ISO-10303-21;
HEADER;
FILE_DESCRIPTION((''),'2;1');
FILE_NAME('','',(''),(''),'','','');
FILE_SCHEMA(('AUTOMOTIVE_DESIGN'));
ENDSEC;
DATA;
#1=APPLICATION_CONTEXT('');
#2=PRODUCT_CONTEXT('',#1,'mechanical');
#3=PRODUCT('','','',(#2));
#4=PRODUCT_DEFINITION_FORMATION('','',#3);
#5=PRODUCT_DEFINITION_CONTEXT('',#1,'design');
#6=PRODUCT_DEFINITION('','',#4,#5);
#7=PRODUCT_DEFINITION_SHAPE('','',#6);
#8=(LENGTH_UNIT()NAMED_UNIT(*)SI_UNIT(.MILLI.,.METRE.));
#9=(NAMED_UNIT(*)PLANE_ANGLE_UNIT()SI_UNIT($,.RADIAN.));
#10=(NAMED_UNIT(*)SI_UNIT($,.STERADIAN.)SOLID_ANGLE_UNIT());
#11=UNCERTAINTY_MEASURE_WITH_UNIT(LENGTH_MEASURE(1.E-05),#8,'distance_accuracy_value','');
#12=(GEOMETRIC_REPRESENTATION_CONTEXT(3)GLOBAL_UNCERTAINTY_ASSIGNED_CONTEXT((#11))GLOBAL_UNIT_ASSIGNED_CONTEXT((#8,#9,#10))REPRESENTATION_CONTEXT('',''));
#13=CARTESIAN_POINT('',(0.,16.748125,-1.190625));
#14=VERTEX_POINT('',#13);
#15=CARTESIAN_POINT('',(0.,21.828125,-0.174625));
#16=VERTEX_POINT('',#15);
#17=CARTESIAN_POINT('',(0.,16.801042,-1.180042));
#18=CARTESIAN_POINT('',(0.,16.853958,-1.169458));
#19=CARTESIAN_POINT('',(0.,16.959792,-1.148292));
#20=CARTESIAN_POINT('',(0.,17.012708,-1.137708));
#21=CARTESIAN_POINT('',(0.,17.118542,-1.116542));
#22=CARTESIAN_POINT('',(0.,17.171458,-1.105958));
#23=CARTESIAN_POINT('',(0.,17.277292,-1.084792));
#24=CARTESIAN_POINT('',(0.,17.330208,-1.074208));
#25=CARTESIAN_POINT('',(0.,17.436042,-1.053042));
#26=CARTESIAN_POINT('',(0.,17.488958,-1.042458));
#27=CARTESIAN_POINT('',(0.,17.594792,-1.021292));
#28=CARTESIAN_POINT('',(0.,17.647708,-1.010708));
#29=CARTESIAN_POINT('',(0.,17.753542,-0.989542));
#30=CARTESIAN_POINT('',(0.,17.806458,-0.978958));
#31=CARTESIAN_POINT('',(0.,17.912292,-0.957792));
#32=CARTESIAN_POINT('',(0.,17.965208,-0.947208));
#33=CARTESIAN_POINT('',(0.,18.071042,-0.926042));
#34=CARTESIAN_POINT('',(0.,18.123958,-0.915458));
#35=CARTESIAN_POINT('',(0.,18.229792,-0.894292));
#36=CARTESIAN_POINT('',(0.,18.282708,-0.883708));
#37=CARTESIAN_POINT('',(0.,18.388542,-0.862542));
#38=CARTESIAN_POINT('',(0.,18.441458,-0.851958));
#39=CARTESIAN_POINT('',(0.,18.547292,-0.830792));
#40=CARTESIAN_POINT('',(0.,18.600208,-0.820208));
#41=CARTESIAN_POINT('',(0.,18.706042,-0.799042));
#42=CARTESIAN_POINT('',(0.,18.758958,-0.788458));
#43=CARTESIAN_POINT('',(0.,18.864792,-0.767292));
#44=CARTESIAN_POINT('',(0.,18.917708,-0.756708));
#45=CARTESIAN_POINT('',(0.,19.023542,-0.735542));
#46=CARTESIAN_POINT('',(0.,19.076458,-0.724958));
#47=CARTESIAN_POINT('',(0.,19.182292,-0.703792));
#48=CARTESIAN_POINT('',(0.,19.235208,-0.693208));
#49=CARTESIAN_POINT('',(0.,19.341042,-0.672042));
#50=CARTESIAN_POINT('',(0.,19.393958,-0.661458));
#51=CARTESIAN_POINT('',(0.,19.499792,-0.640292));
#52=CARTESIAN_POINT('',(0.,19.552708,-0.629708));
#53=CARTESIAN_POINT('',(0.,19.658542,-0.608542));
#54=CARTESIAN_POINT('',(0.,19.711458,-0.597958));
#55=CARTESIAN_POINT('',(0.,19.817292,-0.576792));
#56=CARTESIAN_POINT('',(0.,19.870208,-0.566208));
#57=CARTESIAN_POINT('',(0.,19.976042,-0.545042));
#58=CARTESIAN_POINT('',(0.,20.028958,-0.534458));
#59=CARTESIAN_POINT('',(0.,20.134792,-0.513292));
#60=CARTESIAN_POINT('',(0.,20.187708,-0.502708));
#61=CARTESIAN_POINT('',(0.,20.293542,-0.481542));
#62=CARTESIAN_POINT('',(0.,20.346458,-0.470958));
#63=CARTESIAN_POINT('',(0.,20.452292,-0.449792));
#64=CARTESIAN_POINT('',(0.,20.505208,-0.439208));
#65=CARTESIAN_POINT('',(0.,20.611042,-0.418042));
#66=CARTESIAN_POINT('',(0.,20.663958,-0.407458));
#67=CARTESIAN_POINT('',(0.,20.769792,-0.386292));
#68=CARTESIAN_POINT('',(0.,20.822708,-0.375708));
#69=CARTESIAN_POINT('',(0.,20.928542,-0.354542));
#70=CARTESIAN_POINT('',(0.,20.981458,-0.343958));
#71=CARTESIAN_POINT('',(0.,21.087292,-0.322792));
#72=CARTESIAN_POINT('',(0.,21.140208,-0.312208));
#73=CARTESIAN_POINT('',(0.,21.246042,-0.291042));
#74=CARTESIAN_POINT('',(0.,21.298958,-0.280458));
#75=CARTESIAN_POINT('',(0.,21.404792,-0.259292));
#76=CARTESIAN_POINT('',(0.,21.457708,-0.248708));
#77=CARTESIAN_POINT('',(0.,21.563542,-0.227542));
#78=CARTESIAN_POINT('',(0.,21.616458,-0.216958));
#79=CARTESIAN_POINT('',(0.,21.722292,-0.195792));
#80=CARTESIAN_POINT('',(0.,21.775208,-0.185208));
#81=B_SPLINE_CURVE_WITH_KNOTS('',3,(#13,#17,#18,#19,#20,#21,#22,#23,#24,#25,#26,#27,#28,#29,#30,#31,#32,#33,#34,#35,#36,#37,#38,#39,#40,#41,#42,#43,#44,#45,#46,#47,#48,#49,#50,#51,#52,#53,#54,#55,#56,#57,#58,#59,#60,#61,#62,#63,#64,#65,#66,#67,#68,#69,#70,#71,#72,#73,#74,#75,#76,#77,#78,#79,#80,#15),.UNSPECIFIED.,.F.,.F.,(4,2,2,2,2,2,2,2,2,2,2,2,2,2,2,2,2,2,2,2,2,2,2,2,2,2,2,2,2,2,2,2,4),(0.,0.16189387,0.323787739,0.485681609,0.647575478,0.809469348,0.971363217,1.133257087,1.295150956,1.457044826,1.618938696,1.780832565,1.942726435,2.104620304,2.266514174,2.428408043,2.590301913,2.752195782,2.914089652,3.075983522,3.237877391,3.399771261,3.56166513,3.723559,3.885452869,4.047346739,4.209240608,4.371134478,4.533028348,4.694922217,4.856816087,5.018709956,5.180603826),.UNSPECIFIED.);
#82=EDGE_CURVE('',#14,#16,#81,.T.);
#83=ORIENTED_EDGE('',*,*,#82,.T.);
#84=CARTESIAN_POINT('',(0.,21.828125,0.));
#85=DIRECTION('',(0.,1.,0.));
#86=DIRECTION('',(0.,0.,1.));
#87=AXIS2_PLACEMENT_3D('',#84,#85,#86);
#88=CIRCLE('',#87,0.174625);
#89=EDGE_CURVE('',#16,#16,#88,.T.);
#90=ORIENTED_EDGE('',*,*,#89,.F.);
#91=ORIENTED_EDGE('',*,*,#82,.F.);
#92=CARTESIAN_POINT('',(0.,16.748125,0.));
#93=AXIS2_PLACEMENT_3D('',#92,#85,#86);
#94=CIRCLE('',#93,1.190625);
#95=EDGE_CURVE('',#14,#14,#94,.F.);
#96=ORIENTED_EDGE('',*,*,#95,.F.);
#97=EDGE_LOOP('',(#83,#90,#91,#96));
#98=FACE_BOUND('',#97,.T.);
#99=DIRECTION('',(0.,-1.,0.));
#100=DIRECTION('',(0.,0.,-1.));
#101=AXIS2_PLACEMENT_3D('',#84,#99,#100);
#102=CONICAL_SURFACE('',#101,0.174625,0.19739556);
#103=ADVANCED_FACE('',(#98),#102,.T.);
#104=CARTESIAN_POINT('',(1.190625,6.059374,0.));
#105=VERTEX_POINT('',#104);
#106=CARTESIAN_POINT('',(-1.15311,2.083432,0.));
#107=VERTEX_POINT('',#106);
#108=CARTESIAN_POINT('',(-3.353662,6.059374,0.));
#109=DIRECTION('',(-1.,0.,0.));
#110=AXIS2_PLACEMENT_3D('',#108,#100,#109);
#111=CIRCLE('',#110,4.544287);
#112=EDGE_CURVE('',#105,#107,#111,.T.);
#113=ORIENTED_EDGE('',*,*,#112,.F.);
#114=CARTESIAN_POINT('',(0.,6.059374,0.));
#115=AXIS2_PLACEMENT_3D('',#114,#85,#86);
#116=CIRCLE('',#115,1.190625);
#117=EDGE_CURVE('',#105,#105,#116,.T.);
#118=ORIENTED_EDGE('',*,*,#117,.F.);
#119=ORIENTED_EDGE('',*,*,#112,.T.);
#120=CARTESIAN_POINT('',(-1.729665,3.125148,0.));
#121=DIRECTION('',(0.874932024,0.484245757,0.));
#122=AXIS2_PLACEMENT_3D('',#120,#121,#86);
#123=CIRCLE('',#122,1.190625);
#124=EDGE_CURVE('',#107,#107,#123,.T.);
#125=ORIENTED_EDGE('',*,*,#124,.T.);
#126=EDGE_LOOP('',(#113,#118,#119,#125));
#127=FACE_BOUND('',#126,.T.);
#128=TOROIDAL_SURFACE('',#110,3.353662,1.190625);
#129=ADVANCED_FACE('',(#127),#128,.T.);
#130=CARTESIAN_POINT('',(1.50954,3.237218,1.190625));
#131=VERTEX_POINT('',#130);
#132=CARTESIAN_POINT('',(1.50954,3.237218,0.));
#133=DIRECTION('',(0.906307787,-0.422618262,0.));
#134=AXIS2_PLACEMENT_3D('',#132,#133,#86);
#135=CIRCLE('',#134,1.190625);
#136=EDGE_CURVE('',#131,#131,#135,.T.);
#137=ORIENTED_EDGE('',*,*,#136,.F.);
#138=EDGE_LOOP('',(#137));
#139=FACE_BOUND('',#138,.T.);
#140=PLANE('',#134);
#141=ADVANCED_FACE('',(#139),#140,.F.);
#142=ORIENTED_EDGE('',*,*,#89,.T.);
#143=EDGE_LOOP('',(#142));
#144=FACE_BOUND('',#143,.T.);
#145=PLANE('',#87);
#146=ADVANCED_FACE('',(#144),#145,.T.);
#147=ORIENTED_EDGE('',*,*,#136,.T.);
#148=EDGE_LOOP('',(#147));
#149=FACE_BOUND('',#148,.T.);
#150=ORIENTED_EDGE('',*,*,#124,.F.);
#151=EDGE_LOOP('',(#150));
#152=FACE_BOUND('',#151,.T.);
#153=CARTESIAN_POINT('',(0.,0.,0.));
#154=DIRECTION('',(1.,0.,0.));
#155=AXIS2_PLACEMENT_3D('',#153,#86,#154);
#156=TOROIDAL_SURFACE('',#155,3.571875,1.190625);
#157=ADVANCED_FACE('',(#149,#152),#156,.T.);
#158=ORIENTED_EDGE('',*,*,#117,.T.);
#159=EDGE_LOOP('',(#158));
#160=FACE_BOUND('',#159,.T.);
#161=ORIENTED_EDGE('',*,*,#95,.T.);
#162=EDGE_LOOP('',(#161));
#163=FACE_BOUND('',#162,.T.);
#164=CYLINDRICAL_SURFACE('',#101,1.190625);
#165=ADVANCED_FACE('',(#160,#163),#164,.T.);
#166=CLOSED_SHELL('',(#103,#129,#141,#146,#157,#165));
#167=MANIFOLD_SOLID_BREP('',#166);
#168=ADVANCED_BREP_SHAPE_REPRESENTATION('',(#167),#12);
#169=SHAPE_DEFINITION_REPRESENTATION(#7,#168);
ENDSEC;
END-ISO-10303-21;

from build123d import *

# Parameters (mm, degrees)
SWEEP1_OUTLINE_R   = 1.190625
SWEEP1_ANGLE       = 61.036932
SWEEP1_2_OUTLINE_R = 1.190625
SWEEP1_2_ANGLE     = 306.036932
SWEEP1_START       = 6.059373847
SWEEP1_3_OUTLINE_R = 1.190625
SWEEP1_3_DEPTH     = 15.768751153
CHAMFER1_SIZE      = 5.08
CHAMFER1_SIZE2     = 1.016


with BuildPart() as part:
    # Sweep1: read off the stored shape, not the designer's step
    # Sweep1 outline → Sweep1 (revolve)
    with BuildSketch(Plane(origin=(-3.353661819, 6.059373947, 0), x_dir=(0.48424575692466937, -0.8749320241598509, 0), z_dir=(-0.8749320241598509, -0.48424575692466937, 0))):
        with Locations((3.353661819, 0)):
            Circle(SWEEP1_OUTLINE_R)
    revolve(axis=Axis((-3.353661819, 6.059373947, 0), (0, 0, 1)), revolution_arc=SWEEP1_ANGLE)

    # Sweep1 2 outline → Sweep1 2 (revolve)
    with BuildSketch(Plane(origin=(0, 0, 0), x_dir=(-0.48424575692467253, 0.8749320241598492, 0), z_dir=(0.8749320241598492, 0.48424575692467253, 0))):
        with Locations((3.571875, 0)):
            Circle(SWEEP1_2_OUTLINE_R)
    revolve(axis=Axis((0, 0, 0), (0, 0, 1)), revolution_arc=SWEEP1_2_ANGLE)

    # Sweep1 3 outline → Sweep1 3 (add)
    with BuildSketch(Plane(origin=(0, 0, 0), x_dir=(1, 0, 0), z_dir=(0, 1, 0)).offset(SWEEP1_START)):
        Circle(SWEEP1_3_OUTLINE_R)
    extrude(amount=SWEEP1_3_DEPTH)

    # Chamfer1
    chamfer1_edges = [part.edges().sort_by_distance(p)[0] for p in [
        (-1.190625, 21.828125, 0),
    ]]
    chamfer1_side = [part.faces().sort_by_distance(p)[0] for p in [
        (-1.190625, 13.943749423, 0),
    ]]
    chamfer(chamfer1_edges, length=CHAMFER1_SIZE, length2=CHAMFER1_SIZE2, reference=chamfer1_side[0])


solid = part.part
